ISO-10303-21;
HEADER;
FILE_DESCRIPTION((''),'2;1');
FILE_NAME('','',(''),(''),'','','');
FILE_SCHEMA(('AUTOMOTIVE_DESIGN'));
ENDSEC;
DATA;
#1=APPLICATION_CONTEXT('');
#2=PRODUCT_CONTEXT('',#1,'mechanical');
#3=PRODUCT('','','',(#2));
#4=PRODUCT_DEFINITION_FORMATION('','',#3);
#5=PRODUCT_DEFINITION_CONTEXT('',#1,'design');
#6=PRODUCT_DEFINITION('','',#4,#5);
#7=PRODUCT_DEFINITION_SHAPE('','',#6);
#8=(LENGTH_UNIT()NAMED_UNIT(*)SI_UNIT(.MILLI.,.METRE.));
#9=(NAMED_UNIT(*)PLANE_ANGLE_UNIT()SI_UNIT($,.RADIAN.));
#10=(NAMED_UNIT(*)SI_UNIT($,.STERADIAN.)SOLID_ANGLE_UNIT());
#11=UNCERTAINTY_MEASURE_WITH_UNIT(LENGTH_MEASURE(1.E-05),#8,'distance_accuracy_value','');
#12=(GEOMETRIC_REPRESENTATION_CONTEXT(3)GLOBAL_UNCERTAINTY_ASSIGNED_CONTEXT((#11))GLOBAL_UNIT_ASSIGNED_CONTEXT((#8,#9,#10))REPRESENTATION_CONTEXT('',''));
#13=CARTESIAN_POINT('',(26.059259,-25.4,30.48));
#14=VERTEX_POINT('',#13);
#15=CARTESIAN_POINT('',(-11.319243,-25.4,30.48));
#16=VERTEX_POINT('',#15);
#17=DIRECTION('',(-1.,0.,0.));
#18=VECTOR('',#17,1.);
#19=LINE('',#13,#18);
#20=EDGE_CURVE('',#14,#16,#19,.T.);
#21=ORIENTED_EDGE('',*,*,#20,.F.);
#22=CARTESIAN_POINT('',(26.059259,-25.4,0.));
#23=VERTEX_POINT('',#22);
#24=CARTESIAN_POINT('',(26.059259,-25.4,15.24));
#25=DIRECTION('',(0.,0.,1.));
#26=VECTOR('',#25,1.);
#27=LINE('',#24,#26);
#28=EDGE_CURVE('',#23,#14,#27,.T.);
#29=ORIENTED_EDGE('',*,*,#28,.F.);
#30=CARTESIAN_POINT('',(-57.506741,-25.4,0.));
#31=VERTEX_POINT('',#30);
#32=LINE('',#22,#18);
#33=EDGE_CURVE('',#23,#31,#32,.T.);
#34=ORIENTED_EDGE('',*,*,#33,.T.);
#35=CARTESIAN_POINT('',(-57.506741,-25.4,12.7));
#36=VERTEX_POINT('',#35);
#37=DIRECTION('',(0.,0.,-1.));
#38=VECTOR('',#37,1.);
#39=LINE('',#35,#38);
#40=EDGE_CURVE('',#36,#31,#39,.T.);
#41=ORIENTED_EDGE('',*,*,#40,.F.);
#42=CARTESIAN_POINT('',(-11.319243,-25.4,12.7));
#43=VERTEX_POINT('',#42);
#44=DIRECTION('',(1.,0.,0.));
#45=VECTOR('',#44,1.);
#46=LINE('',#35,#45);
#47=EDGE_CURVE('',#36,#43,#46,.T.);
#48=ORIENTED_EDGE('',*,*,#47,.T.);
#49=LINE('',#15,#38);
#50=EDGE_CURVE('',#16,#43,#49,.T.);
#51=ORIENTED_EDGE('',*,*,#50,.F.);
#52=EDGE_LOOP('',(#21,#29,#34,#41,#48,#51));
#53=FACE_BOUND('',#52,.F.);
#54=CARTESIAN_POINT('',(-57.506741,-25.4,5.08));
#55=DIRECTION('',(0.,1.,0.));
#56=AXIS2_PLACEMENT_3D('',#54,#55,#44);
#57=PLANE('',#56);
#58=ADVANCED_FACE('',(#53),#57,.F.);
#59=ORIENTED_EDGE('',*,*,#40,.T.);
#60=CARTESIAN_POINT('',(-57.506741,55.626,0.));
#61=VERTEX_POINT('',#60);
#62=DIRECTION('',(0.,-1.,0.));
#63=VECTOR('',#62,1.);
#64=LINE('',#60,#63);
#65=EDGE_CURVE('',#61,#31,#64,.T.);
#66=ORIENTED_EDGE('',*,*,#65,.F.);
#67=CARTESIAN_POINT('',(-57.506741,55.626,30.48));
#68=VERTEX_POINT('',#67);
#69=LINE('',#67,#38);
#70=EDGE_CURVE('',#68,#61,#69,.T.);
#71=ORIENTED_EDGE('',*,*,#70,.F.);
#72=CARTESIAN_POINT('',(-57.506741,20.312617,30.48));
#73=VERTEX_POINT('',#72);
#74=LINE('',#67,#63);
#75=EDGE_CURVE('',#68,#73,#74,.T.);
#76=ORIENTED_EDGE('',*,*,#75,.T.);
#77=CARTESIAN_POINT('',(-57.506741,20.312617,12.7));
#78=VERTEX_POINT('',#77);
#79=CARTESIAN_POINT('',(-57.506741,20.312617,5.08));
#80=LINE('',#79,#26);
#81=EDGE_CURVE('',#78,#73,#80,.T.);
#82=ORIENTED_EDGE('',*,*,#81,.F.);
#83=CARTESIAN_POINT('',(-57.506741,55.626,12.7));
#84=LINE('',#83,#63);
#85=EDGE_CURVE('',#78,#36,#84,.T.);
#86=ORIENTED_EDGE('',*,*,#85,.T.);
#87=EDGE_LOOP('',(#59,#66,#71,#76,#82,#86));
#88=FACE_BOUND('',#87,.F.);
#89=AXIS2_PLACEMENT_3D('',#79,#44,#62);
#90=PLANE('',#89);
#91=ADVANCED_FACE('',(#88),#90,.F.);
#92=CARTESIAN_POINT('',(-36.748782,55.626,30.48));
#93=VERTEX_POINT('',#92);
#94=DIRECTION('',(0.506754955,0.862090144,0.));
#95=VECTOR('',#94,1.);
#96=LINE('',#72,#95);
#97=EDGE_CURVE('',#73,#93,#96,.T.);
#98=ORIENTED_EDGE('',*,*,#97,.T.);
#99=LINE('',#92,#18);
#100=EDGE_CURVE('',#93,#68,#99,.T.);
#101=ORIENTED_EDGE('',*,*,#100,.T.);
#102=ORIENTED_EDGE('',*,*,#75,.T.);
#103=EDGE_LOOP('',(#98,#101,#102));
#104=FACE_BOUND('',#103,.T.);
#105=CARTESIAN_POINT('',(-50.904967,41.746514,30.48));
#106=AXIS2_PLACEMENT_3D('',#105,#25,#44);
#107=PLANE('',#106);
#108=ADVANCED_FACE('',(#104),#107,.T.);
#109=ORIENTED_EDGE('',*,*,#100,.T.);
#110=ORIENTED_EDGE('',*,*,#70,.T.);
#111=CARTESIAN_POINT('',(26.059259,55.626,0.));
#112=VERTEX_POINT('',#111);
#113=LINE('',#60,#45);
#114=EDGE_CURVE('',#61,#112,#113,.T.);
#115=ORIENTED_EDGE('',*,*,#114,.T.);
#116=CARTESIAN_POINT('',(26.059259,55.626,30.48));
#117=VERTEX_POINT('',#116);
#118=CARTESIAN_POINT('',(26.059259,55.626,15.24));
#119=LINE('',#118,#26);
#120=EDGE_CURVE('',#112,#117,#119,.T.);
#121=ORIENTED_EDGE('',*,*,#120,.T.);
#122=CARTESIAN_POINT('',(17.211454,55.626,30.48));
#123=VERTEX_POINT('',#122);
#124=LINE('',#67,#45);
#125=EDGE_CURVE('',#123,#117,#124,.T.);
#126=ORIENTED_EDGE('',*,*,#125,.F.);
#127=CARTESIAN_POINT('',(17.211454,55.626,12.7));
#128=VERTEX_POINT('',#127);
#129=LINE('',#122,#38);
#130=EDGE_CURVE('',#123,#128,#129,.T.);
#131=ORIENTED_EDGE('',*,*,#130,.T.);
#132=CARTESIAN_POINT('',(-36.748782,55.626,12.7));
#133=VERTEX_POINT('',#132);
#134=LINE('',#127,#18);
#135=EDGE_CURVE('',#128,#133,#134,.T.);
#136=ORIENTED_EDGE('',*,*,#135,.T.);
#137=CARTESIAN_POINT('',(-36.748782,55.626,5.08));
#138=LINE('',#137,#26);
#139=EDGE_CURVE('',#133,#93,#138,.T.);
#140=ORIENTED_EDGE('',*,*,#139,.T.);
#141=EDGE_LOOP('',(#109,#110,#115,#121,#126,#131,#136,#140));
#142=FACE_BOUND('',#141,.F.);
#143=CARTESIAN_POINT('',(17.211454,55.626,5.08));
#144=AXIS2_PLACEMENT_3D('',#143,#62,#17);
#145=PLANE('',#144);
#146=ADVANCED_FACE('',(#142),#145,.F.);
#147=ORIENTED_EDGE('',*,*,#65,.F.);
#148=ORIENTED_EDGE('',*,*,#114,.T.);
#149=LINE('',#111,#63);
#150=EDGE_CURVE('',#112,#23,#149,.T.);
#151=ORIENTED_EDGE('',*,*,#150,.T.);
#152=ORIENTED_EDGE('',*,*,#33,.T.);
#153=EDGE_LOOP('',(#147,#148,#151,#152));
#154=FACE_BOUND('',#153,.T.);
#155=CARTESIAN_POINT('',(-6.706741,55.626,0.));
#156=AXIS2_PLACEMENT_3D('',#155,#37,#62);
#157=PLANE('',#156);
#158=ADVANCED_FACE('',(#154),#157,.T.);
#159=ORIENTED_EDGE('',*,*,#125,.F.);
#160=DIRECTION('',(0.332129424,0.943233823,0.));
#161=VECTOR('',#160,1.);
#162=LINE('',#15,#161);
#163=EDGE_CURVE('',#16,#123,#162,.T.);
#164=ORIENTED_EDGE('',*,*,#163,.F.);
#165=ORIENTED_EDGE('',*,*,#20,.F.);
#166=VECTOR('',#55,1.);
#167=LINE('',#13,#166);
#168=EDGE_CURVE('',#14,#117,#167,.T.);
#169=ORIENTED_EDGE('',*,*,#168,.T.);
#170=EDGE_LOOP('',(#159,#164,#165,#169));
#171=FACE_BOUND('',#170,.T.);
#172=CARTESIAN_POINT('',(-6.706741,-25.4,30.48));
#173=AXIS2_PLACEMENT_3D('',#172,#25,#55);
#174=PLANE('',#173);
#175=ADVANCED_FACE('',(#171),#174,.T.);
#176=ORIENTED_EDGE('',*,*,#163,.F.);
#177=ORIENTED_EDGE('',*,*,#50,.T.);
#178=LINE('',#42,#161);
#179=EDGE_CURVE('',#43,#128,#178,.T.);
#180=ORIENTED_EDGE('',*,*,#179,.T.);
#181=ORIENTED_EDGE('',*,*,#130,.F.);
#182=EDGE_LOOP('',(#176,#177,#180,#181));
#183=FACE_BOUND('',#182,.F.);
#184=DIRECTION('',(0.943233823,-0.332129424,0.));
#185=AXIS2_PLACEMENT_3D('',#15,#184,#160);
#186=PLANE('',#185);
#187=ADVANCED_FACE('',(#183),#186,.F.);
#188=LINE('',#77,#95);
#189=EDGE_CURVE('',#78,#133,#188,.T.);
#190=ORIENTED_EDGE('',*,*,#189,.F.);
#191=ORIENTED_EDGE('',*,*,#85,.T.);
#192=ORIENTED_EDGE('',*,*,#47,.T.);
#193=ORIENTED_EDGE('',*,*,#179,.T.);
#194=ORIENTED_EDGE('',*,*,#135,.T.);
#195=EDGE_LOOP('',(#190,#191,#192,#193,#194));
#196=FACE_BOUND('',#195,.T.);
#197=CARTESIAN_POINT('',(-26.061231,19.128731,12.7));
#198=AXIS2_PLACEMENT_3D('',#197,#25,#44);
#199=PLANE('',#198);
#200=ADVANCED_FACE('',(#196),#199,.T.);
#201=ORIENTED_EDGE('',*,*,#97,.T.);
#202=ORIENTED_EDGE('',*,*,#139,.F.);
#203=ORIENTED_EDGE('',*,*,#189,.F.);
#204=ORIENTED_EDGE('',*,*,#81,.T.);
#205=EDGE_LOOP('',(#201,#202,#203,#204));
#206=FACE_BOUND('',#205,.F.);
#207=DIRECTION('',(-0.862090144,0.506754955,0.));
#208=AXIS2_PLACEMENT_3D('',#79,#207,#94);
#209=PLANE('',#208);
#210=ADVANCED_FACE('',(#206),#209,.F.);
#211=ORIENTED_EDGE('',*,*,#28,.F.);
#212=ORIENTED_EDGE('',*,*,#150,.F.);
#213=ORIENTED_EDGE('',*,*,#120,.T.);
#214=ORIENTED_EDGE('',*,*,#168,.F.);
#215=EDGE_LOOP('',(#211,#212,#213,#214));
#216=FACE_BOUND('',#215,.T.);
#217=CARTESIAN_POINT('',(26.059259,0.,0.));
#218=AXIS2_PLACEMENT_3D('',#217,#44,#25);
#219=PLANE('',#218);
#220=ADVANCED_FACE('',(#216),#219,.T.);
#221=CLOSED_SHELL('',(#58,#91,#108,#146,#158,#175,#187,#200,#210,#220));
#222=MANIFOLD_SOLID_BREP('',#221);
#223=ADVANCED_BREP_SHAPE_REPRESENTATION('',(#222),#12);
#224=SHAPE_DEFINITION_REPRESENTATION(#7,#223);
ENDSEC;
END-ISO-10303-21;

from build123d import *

# Parameters (mm, degrees)
F0_W      = 50.8
F0_H      = 30.48
F1_DEPTH  = 25.4
F2_DEPTH  = 55.626
F3_DEPTH  = 32.766
F6_DEPTH  = 25.4
F7_DEPTH  = 25.4
F9_DEPTH  = 25.4
F10_DEPTH = 7.62


with BuildPart() as f1:
    # F0 (on Front) → F1 (new body)
    with BuildSketch(Plane.XZ):
        with Locations((-32.1067409651, 15.24)):
            Rectangle(F0_W, F0_H)
    extrude(amount=F1_DEPTH)

    # F2 (add): a face of the model
    f2_faces = [f1.faces().sort_by_distance(p)[0] for p in [
        (-32.1067409651, 0, 15.24),
    ]]
    extrude(f2_faces, amount=F2_DEPTH)

    # F3 (add): a face of the model
    f3_faces = [f1.faces().sort_by_distance(p)[0] for p in [
        (-6.7067409651, 15.113, 15.24),
    ]]
    extrude(f3_faces, amount=F3_DEPTH)

    # F4 (on face) → F6 (cut)
    with BuildSketch(Plane.XY.offset(30.48)):
        Polygon((-11.3192433491, -25.4), (17.2114539891, 55.626), (-57.5067409651, 55.626), (-57.5067409651, -25.4), align=None)
    extrude(amount=-F6_DEPTH, mode=Mode.SUBTRACT)

    # F5 (on face) → F7 (cut)
    with BuildSketch(Plane.XY.offset(30.48)):
        Polygon((-57.5067409651, -25.4), (-11.3192433491, -25.4), (17.2114539891, 55.626), (-43.2823600247, 55.626), (-57.5067409651, 55.626), align=None)
    extrude(amount=-F7_DEPTH, mode=Mode.SUBTRACT)

    # F8 (on face) → F9 (join)
    with BuildSketch(Plane.XY.offset(5.08)):
        Polygon((-57.5067409651, 20.3126166016), (-36.7487818003, 55.626), (-57.5067409651, 55.626), align=None)
    extrude(amount=F9_DEPTH)

    # F10 (add): a face of the model
    f10_faces = [f1.faces().sort_by_distance(p)[0] for p in [
        (-24.788870281, 16.2328343869, 5.08),
    ]]
    extrude(f10_faces, amount=F10_DEPTH)


solid = f1.part
